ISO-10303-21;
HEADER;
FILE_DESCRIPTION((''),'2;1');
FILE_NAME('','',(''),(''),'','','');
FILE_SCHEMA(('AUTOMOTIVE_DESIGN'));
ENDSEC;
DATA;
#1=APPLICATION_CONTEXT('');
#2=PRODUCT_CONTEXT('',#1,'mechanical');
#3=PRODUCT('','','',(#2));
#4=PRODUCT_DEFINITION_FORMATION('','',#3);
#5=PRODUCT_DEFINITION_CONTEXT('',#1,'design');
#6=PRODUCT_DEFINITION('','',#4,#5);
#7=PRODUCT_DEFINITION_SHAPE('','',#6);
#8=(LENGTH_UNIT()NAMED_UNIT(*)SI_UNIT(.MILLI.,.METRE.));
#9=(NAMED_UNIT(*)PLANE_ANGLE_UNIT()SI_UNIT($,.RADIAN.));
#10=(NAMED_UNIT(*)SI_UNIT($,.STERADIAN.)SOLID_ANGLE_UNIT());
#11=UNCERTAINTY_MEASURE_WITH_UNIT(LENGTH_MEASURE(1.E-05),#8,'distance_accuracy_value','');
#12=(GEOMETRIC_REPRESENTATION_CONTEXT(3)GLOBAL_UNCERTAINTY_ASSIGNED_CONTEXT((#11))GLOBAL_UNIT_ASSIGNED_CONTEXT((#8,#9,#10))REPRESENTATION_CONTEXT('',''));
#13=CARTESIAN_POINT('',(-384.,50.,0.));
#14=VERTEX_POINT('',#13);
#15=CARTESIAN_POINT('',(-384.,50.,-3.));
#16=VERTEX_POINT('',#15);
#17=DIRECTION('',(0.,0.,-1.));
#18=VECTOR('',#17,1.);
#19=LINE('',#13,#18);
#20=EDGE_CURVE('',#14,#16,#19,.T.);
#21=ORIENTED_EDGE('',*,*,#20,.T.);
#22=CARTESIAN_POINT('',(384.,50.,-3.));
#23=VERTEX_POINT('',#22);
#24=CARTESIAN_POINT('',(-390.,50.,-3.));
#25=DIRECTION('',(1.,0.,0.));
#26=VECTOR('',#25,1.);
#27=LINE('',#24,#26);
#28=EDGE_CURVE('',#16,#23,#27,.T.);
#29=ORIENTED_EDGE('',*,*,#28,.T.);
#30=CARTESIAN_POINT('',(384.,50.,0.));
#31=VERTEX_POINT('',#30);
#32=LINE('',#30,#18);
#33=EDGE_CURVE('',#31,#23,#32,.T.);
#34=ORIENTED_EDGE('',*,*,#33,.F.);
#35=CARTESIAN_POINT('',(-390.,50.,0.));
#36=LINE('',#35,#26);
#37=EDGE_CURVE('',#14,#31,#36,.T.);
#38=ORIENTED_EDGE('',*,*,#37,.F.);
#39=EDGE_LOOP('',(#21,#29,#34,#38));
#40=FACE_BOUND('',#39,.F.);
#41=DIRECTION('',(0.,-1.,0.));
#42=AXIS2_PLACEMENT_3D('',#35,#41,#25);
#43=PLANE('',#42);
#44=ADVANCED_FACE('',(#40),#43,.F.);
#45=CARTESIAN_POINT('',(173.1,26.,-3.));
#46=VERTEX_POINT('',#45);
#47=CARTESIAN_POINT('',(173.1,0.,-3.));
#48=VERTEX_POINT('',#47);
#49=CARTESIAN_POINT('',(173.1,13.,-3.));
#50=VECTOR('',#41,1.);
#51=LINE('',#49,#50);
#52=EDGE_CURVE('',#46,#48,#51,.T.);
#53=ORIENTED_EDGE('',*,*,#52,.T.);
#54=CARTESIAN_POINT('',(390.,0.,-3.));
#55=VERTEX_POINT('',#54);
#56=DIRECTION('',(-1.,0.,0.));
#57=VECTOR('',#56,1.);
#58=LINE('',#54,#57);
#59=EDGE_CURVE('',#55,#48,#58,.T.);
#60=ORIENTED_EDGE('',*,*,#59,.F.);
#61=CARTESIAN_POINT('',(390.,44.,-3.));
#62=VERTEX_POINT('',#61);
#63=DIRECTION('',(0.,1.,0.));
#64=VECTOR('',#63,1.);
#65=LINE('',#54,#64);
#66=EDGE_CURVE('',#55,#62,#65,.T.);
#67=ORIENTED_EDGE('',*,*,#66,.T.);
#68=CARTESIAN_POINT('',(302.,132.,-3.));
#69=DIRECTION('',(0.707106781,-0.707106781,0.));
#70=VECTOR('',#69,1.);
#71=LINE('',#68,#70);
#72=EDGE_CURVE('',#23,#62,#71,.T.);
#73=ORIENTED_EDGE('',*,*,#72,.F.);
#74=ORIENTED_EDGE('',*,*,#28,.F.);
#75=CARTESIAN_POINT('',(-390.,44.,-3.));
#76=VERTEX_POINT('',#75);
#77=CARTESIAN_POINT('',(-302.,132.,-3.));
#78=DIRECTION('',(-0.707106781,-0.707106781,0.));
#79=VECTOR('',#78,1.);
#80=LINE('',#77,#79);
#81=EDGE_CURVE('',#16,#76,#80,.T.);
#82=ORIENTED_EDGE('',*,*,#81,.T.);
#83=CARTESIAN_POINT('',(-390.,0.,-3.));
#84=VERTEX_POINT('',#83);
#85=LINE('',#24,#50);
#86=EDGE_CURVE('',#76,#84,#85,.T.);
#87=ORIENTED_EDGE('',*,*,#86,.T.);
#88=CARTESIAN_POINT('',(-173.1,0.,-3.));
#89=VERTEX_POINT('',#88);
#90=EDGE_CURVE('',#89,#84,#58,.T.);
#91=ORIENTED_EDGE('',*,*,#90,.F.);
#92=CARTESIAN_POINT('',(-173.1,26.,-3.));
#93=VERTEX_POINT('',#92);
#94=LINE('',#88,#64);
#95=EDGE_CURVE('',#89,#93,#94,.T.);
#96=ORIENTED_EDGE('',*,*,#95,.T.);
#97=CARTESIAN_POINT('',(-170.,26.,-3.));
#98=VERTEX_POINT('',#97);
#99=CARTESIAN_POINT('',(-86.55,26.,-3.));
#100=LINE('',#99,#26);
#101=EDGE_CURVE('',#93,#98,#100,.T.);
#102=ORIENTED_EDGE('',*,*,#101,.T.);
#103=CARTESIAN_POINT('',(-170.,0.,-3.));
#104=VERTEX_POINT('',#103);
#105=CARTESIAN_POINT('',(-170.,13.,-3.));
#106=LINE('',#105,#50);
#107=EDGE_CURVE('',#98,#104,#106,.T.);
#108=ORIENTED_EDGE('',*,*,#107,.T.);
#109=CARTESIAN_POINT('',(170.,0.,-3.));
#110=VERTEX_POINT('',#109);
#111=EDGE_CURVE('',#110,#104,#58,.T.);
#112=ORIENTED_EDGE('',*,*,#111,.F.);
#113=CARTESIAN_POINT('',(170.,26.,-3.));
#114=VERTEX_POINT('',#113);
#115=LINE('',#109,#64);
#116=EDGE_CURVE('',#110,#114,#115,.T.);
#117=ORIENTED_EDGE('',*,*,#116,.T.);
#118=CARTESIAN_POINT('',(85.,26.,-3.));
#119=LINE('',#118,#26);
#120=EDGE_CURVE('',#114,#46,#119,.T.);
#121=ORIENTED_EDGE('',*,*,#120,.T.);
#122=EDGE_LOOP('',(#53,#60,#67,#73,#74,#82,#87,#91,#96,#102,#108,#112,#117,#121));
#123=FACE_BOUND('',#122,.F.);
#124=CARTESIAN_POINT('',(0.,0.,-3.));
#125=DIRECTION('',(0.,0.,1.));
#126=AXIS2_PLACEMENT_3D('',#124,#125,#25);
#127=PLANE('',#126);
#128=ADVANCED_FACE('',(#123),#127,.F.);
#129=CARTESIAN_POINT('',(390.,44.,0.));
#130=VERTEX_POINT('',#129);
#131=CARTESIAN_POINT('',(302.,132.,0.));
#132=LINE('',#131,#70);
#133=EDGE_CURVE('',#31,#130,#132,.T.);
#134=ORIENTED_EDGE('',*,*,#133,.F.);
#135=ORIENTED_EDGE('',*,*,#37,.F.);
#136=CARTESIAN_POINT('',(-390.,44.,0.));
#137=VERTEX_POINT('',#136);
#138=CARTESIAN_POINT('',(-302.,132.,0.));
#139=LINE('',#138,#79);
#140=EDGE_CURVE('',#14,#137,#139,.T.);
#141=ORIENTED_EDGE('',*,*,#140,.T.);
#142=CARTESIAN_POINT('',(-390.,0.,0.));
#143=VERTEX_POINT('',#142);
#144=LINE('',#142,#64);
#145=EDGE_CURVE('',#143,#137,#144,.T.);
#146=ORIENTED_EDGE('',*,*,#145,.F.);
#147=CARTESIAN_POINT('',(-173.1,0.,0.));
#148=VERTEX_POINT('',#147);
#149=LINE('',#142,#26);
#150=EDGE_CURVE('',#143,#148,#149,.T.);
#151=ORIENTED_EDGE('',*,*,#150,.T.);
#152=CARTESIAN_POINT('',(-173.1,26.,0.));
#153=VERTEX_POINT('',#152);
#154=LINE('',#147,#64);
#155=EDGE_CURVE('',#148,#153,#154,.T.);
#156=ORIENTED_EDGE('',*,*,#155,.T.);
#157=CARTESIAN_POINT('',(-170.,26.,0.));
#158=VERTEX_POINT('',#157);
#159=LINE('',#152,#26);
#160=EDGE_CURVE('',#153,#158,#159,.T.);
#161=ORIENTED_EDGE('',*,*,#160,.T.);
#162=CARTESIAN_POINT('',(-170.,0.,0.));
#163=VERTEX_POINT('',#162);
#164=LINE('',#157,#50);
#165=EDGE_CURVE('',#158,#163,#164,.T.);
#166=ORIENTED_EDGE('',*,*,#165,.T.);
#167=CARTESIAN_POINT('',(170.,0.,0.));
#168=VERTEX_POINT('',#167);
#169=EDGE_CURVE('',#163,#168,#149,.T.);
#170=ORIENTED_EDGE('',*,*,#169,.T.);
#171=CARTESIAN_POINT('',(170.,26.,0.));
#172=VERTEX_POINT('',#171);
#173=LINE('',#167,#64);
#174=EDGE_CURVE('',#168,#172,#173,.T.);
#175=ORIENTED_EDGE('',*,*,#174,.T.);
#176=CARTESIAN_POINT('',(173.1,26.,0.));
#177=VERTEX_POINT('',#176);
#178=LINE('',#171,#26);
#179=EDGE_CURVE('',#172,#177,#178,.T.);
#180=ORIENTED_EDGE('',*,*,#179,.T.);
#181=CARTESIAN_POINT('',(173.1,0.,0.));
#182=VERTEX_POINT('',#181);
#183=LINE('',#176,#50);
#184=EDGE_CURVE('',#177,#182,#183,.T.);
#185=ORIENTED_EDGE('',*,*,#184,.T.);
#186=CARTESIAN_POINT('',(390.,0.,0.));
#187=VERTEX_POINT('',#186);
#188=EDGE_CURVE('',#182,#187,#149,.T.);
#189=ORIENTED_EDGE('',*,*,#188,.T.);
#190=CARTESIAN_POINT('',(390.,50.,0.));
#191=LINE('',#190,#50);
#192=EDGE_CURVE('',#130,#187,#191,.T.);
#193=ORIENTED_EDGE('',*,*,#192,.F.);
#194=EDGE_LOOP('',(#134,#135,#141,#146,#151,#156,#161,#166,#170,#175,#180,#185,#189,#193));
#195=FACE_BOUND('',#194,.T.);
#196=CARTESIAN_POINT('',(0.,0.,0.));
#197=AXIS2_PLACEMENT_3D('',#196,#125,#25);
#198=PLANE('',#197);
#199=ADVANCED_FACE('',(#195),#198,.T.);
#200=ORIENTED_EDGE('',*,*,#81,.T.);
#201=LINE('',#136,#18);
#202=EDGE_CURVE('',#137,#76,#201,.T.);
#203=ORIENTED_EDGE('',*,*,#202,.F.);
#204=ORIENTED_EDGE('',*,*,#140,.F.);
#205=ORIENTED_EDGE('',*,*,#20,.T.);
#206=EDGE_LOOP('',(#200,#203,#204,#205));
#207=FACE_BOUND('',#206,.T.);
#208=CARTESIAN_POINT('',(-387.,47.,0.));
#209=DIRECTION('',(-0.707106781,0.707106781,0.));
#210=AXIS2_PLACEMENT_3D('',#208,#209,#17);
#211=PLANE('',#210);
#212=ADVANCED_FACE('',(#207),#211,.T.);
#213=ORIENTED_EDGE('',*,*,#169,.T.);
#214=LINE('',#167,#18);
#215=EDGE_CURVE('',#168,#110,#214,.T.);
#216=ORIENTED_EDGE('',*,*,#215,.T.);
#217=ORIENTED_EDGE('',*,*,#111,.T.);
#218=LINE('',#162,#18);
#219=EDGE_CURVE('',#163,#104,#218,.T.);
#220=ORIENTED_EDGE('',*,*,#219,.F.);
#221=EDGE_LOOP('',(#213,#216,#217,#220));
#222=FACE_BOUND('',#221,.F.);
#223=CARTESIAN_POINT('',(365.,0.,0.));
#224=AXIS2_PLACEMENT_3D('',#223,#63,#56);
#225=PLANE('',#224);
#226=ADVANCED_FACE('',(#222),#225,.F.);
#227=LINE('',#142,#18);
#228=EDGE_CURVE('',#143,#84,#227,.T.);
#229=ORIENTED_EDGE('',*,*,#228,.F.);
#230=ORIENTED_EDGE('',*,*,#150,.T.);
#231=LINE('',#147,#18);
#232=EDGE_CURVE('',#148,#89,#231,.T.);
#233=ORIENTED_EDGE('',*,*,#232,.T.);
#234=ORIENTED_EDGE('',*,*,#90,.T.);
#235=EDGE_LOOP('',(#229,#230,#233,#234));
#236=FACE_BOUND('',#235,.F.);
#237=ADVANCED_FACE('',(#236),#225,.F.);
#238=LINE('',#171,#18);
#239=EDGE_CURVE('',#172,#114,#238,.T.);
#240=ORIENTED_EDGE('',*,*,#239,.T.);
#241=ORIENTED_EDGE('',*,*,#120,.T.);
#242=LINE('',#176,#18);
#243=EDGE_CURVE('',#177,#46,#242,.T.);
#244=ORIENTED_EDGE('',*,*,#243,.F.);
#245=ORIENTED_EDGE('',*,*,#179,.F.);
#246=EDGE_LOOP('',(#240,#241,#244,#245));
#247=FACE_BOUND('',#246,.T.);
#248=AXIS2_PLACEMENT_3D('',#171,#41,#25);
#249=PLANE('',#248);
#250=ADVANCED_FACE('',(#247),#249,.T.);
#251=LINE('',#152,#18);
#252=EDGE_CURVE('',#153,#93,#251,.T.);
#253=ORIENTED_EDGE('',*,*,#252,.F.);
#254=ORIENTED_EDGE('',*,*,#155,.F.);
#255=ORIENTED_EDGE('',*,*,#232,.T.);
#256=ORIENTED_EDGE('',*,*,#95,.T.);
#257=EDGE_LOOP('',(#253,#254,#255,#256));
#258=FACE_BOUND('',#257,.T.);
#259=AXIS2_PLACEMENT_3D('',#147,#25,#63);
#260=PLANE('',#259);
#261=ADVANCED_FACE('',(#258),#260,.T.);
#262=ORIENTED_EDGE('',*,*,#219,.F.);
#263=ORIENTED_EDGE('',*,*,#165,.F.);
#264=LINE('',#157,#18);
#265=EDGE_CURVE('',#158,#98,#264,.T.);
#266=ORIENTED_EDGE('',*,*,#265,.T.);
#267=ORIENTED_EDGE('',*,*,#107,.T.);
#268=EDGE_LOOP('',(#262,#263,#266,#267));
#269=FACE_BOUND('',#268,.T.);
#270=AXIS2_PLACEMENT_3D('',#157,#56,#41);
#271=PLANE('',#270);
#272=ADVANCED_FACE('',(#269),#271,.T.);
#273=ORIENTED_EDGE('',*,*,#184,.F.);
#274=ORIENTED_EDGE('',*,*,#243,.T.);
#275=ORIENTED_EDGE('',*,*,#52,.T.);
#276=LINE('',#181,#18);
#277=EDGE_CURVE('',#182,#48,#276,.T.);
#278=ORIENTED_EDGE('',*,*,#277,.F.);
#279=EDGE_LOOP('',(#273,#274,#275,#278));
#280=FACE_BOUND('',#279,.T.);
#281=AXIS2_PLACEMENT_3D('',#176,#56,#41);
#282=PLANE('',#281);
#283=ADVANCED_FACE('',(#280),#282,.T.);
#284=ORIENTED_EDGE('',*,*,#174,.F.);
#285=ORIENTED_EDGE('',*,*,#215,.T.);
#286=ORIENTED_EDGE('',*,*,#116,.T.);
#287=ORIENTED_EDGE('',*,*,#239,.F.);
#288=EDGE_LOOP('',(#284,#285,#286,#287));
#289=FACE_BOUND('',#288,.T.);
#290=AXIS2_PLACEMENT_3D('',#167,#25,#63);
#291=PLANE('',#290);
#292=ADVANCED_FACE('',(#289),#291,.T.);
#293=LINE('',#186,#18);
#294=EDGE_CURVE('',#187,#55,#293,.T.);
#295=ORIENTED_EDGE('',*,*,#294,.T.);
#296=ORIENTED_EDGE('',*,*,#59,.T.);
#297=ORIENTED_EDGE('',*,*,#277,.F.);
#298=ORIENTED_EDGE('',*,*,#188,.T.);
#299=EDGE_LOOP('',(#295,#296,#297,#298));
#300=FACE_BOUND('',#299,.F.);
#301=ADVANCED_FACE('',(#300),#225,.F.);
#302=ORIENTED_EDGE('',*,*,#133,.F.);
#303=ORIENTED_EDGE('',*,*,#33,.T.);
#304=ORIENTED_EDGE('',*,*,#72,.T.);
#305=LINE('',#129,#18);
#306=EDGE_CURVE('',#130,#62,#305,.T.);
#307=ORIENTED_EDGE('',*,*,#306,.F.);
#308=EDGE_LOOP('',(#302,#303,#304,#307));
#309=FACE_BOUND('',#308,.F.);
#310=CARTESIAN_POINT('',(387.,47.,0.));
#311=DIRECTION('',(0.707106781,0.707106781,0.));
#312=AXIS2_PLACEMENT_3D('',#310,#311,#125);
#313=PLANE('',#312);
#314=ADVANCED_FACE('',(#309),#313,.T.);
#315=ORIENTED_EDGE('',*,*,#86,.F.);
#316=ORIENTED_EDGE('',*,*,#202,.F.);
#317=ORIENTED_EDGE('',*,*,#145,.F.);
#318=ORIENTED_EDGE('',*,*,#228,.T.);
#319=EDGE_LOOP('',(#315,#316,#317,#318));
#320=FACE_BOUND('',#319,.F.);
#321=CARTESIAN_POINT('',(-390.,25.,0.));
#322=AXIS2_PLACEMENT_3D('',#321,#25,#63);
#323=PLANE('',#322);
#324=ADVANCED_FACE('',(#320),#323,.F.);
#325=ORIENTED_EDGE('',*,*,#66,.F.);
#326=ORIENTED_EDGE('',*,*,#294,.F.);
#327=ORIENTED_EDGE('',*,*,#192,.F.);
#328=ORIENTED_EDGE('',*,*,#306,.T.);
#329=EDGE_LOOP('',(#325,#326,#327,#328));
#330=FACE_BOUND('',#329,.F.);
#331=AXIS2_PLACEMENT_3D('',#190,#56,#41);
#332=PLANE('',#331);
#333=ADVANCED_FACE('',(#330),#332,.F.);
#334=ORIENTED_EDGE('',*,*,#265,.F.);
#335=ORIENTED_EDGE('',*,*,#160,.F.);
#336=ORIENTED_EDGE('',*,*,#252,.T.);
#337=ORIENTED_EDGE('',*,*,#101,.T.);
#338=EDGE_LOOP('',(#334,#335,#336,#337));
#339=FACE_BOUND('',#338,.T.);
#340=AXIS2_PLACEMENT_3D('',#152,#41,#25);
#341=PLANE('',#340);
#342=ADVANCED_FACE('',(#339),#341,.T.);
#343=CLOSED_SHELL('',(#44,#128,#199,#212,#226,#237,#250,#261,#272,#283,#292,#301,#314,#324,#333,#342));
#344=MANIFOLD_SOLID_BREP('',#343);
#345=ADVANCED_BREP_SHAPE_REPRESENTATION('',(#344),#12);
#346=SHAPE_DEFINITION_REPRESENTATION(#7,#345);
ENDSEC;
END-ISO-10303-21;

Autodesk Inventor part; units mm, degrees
ref_plane "YZ Plane" through (0, 0, 0) normal (1, 0, 0) x (0, 1, 0)
ref_plane "XZ Plane" through (0, 0, 0) normal (0, 1, 0) x (-1, 0, 0)
ref_plane "XY Plane" through (0, 0, 0) normal (0, 0, 1) x (1, 0, 0)
sketch "Sketch1" plane through (0, 0, 0) normal (0, 0, 1) x (1, 0, 0)
  line L0 (-390, 50) -> (390, 50)
  line L1 (390, 50) -> (390, 0)
  line L2 (390, 0) -> (-390, 0)
  line L3 (-390, 0) -> (-390, 50)
  circle A0 centre (-390, 0) radius 25
  circle A1 centre (390, 0) radius 25
  point P0 (0, 0)
  point P1 (0, 0)
  point P2 (-390, 25)
  point P3 (-365, 0)
  point P4 (365, 0)
  point P5 (390, 25)
  dimension "d16" = 50
  dimension "d17" = 780
  dimension "d18" = 50
  dimension "d19" = 50
extrude "Plate2" add sketch "Sketch1" against normal blind 3 contours L0 L1 A1 L2 A0 L3 | A0 L2 L3 | L1 L2 A1 picked at (-378.289, 11.711) picked at (388.1457, 16.4577)
sketch "Sketch2" plane through (0, 0, 0) normal (0, 0, 1) x (1, 0, 0)
  line L0 (390, 50) -> (-390, 50) projected
  line L1 (171.55, 50) -> (171.55, 0) construction
  line L2 (-390, 0) -> (390, 0) projected
  line L3 (170, 26) -> (173.1, 26)
  line L4 (173.1, 26) -> (173.1, 0)
  line L5 (173.1, 0) -> (170, 0)
  line L6 (170, 0) -> (170, 26)
  line L7 (-171.55, 0) -> (-171.55, 50) construction
  line L8 (-173.1, 26) -> (-170, 26)
  line L9 (-170, 26) -> (-170, 0)
  line L10 (-170, 0) -> (-173.1, 0)
  line L11 (-173.1, 0) -> (-173.1, 26)
  line L12 (0, 0) -> (0, 50)
  point P0 (0, 0)
  point P1 (170, 0)
  point P2 (173.1, 0)
  point P3 (-173.1, 0)
  point P4 (-170, 0)
  dimension "d27" = 26
  dimension "d28" = 3.1
  dimension "d34" = 340
extrude "Extrusion1" cut sketch "Sketch2" against normal blind 10
sketch "Sketch4" plane through (0, 0, -3) normal (0, 0, -1) x (-1, 0, 0)
  line L0 (-62.455, 14.7345) -> (-62.455, 33.3208) construction
  line L1 (-62.455, 33.3208) -> (72.8584, 33.3208) construction
  line L2 (72.8584, 33.3208) -> (72.8584, 14.7345) construction
  line L3 (72.8584, 14.7345) -> (-62.455, 14.7345) construction
  point P0 (0, 0)
mark "Mark1"
chamfer "Corner Chamfer1" distance 6 angle 45 2 edges at (390, 50, -1.5) (-390, 50, -1.5)
equation "\"d27\" = d23"
equation "\"d20\" = Thickness"
equation "\"BendReliefWidth\" = Thickness"
equation "\"BendReliefDepth\" = 0.5 * Thickness"
equation "\"CornerReliefSize\" = 4 * Thickness"
equation "\"MinimumRemnant\" = 2 * Thickness"
equation "\"TransitionRadius\" = BendRadius"
equation "\"JacobiRadiusSize\" = BendRadius"
equation "\"GapSize\" = Thickness"
equation "\"d23\" = 26"
equation "\"Thickness\" = 3"
equation "\"BendRadius\" = 5"
properties part number "MSC 109 RIB CONE" material "Stainless Steel"
